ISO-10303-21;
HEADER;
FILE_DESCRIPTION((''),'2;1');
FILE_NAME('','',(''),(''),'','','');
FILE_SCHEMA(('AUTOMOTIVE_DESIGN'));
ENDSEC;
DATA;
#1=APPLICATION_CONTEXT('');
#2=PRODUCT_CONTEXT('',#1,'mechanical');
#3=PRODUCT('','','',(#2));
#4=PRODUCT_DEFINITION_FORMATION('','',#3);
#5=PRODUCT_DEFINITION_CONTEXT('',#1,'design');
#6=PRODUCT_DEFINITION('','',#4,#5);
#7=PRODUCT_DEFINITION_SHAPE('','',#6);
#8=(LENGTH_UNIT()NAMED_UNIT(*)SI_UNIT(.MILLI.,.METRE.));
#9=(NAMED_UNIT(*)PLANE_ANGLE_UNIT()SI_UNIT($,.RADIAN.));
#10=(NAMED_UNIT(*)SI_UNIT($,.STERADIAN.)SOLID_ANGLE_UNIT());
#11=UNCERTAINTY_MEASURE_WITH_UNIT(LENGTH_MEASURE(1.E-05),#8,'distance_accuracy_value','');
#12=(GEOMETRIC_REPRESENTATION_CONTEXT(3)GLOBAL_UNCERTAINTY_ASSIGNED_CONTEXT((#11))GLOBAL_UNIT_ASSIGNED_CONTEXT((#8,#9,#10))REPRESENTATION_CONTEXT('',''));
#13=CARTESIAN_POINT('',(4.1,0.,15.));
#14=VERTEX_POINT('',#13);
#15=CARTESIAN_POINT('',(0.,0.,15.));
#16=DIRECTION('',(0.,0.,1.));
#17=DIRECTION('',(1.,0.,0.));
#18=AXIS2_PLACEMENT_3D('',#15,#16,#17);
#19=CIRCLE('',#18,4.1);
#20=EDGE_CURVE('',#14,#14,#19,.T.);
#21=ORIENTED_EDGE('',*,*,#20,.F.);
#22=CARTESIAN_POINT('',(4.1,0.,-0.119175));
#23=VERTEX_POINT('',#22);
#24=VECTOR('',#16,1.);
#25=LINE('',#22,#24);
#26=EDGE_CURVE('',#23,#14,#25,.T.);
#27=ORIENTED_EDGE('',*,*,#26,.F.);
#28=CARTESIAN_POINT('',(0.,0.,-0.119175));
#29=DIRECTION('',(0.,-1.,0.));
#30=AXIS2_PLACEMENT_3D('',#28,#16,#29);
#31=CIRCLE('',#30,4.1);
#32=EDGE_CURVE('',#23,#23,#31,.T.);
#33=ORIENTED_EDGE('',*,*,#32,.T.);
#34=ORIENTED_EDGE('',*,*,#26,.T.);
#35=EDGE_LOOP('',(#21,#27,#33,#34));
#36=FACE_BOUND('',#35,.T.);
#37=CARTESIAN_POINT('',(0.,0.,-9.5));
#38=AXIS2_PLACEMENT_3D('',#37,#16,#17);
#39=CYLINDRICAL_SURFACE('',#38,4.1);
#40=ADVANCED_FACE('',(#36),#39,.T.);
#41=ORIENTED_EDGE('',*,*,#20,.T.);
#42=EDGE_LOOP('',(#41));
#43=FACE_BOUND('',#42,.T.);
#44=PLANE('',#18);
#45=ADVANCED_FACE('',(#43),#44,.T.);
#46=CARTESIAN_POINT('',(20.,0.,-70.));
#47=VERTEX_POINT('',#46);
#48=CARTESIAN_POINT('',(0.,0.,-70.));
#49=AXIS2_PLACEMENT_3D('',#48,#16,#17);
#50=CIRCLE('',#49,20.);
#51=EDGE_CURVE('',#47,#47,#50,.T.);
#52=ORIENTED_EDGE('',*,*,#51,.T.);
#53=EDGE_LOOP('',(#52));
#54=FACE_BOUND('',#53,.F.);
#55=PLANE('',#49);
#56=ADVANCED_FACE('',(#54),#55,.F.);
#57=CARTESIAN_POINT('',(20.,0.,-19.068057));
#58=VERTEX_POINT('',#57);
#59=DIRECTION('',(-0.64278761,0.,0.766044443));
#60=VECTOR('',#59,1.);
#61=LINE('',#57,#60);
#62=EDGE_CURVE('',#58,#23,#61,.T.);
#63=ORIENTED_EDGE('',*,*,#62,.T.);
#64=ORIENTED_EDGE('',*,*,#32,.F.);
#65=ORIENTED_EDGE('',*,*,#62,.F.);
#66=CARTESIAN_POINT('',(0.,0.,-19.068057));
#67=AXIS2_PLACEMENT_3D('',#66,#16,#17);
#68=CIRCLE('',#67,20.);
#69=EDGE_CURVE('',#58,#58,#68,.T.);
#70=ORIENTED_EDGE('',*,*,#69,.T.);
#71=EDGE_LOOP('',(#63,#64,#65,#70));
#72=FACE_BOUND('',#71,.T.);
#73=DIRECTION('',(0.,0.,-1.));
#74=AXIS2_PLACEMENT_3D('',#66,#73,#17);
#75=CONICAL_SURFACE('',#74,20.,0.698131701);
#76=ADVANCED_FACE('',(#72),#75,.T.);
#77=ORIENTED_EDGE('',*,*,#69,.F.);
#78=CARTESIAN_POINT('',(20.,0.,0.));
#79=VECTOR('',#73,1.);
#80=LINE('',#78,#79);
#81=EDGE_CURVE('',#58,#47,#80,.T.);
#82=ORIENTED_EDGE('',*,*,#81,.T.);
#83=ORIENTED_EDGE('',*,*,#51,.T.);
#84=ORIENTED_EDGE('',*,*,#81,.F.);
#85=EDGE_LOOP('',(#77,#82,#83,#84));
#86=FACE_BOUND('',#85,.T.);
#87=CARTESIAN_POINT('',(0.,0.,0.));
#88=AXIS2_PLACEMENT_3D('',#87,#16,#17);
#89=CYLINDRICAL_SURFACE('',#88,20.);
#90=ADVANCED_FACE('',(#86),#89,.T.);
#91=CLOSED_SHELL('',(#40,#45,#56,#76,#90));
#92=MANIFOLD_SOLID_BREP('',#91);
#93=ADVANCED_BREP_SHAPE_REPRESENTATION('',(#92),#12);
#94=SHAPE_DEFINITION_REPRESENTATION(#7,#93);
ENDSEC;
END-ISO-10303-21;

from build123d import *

# Parameters (mm, degrees)
F0_R        = 4.1
F1_DEPTH    = 15
F2_R        = 20
F3_DEPTH    = 70
F4_S5_R     = 4.1
F4_T6_DEPTH = 31


# Not quite as in the source:
# - a fillet or chamfer that OpenCascade refuses, or shapes differently, is made with other operations: its cross-section is extruded or revolved along the edge and cut away or added


with BuildPart() as f1:
    # F0 (on Top) → F1 (new body)
    with BuildSketch(Plane.XY):
        Circle(F0_R)
    extrude(amount=F1_DEPTH)

    # F2 (on Top) → F3 (join)
    with BuildSketch(Plane.XY):
        Circle(F2_R)
    extrude(amount=-F3_DEPTH)

    # F4: chamfer of 16 x 19.0680574815 on 1 edges, made by hand


with BuildPart() as f4_tool2:
    # F4_s3 → F4_t4 (revolve)
    with BuildSketch(Plane.XZ):
        Polygon((20, -19.0680574815), (4, 0), (20, 0), align=None)
    revolve(axis=Axis((0, 0, 0), (0, 0, 1)))

    # F4_s5 → F4_t6 (cut, symmetric)
    with BuildSketch(Plane.XY.offset(-9.5)):
        Circle(F4_S5_R)
    extrude(amount=F4_T6_DEPTH, both=True, mode=Mode.SUBTRACT)


with BuildPart() as f1_1:
    add(f1.part)

    # F4_t1: cut F4_tool2
    add(f4_tool2.part, mode=Mode.SUBTRACT)


solid = f1_1.part
